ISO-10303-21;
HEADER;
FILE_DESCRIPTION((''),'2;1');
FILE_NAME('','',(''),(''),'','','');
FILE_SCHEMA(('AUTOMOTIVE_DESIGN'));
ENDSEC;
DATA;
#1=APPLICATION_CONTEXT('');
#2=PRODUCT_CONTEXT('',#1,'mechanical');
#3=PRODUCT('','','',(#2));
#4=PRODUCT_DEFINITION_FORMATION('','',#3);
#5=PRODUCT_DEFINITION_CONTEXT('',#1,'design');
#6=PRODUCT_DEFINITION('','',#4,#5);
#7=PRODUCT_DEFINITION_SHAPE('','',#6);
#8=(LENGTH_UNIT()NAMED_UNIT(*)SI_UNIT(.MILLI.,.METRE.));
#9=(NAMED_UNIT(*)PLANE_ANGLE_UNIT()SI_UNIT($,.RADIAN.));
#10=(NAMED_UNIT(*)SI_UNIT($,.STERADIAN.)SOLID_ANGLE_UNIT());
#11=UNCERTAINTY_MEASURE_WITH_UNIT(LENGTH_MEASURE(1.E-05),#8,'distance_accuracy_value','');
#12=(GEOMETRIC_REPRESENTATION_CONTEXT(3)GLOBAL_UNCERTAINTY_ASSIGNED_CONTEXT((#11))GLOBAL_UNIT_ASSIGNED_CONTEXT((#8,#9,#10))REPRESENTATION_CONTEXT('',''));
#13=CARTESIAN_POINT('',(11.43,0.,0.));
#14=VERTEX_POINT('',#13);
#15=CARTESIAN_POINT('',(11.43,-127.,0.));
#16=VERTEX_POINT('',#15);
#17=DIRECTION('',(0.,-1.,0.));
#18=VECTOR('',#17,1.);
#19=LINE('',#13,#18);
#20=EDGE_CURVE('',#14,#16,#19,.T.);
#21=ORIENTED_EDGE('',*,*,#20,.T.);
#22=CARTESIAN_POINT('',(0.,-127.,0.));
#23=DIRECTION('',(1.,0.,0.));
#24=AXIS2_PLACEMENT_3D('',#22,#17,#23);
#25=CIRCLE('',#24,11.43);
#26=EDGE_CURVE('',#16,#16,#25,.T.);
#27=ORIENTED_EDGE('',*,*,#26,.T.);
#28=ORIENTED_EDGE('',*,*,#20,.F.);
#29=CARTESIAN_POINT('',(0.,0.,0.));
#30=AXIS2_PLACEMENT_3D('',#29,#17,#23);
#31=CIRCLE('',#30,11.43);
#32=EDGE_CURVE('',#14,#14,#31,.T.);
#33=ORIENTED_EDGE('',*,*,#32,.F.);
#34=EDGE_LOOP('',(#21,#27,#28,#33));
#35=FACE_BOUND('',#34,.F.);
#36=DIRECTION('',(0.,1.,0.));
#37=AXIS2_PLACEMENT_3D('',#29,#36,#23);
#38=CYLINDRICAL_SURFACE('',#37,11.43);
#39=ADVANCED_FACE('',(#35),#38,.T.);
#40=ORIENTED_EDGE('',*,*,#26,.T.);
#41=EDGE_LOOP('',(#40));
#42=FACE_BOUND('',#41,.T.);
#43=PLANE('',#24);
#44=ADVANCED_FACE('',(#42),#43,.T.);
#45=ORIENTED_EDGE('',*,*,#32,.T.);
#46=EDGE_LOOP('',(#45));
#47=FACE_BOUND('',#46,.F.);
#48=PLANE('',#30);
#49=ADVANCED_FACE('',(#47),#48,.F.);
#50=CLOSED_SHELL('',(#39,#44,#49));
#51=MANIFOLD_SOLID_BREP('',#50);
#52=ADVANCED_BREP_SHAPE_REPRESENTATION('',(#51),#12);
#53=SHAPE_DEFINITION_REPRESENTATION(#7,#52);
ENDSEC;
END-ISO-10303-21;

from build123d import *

# Parameters (mm, degrees)
F0_R     = 11.43
F1_DEPTH = 127


# Not quite as in the source:
# - a feature names something its author has since deleted; it is built from what else it names


with BuildPart() as f1:
    # F0 (on Front) → F1 (new body)
    with BuildSketch(Plane.XZ):
        Circle(F0_R)
    extrude(amount=F1_DEPTH)


solid = f1.part
